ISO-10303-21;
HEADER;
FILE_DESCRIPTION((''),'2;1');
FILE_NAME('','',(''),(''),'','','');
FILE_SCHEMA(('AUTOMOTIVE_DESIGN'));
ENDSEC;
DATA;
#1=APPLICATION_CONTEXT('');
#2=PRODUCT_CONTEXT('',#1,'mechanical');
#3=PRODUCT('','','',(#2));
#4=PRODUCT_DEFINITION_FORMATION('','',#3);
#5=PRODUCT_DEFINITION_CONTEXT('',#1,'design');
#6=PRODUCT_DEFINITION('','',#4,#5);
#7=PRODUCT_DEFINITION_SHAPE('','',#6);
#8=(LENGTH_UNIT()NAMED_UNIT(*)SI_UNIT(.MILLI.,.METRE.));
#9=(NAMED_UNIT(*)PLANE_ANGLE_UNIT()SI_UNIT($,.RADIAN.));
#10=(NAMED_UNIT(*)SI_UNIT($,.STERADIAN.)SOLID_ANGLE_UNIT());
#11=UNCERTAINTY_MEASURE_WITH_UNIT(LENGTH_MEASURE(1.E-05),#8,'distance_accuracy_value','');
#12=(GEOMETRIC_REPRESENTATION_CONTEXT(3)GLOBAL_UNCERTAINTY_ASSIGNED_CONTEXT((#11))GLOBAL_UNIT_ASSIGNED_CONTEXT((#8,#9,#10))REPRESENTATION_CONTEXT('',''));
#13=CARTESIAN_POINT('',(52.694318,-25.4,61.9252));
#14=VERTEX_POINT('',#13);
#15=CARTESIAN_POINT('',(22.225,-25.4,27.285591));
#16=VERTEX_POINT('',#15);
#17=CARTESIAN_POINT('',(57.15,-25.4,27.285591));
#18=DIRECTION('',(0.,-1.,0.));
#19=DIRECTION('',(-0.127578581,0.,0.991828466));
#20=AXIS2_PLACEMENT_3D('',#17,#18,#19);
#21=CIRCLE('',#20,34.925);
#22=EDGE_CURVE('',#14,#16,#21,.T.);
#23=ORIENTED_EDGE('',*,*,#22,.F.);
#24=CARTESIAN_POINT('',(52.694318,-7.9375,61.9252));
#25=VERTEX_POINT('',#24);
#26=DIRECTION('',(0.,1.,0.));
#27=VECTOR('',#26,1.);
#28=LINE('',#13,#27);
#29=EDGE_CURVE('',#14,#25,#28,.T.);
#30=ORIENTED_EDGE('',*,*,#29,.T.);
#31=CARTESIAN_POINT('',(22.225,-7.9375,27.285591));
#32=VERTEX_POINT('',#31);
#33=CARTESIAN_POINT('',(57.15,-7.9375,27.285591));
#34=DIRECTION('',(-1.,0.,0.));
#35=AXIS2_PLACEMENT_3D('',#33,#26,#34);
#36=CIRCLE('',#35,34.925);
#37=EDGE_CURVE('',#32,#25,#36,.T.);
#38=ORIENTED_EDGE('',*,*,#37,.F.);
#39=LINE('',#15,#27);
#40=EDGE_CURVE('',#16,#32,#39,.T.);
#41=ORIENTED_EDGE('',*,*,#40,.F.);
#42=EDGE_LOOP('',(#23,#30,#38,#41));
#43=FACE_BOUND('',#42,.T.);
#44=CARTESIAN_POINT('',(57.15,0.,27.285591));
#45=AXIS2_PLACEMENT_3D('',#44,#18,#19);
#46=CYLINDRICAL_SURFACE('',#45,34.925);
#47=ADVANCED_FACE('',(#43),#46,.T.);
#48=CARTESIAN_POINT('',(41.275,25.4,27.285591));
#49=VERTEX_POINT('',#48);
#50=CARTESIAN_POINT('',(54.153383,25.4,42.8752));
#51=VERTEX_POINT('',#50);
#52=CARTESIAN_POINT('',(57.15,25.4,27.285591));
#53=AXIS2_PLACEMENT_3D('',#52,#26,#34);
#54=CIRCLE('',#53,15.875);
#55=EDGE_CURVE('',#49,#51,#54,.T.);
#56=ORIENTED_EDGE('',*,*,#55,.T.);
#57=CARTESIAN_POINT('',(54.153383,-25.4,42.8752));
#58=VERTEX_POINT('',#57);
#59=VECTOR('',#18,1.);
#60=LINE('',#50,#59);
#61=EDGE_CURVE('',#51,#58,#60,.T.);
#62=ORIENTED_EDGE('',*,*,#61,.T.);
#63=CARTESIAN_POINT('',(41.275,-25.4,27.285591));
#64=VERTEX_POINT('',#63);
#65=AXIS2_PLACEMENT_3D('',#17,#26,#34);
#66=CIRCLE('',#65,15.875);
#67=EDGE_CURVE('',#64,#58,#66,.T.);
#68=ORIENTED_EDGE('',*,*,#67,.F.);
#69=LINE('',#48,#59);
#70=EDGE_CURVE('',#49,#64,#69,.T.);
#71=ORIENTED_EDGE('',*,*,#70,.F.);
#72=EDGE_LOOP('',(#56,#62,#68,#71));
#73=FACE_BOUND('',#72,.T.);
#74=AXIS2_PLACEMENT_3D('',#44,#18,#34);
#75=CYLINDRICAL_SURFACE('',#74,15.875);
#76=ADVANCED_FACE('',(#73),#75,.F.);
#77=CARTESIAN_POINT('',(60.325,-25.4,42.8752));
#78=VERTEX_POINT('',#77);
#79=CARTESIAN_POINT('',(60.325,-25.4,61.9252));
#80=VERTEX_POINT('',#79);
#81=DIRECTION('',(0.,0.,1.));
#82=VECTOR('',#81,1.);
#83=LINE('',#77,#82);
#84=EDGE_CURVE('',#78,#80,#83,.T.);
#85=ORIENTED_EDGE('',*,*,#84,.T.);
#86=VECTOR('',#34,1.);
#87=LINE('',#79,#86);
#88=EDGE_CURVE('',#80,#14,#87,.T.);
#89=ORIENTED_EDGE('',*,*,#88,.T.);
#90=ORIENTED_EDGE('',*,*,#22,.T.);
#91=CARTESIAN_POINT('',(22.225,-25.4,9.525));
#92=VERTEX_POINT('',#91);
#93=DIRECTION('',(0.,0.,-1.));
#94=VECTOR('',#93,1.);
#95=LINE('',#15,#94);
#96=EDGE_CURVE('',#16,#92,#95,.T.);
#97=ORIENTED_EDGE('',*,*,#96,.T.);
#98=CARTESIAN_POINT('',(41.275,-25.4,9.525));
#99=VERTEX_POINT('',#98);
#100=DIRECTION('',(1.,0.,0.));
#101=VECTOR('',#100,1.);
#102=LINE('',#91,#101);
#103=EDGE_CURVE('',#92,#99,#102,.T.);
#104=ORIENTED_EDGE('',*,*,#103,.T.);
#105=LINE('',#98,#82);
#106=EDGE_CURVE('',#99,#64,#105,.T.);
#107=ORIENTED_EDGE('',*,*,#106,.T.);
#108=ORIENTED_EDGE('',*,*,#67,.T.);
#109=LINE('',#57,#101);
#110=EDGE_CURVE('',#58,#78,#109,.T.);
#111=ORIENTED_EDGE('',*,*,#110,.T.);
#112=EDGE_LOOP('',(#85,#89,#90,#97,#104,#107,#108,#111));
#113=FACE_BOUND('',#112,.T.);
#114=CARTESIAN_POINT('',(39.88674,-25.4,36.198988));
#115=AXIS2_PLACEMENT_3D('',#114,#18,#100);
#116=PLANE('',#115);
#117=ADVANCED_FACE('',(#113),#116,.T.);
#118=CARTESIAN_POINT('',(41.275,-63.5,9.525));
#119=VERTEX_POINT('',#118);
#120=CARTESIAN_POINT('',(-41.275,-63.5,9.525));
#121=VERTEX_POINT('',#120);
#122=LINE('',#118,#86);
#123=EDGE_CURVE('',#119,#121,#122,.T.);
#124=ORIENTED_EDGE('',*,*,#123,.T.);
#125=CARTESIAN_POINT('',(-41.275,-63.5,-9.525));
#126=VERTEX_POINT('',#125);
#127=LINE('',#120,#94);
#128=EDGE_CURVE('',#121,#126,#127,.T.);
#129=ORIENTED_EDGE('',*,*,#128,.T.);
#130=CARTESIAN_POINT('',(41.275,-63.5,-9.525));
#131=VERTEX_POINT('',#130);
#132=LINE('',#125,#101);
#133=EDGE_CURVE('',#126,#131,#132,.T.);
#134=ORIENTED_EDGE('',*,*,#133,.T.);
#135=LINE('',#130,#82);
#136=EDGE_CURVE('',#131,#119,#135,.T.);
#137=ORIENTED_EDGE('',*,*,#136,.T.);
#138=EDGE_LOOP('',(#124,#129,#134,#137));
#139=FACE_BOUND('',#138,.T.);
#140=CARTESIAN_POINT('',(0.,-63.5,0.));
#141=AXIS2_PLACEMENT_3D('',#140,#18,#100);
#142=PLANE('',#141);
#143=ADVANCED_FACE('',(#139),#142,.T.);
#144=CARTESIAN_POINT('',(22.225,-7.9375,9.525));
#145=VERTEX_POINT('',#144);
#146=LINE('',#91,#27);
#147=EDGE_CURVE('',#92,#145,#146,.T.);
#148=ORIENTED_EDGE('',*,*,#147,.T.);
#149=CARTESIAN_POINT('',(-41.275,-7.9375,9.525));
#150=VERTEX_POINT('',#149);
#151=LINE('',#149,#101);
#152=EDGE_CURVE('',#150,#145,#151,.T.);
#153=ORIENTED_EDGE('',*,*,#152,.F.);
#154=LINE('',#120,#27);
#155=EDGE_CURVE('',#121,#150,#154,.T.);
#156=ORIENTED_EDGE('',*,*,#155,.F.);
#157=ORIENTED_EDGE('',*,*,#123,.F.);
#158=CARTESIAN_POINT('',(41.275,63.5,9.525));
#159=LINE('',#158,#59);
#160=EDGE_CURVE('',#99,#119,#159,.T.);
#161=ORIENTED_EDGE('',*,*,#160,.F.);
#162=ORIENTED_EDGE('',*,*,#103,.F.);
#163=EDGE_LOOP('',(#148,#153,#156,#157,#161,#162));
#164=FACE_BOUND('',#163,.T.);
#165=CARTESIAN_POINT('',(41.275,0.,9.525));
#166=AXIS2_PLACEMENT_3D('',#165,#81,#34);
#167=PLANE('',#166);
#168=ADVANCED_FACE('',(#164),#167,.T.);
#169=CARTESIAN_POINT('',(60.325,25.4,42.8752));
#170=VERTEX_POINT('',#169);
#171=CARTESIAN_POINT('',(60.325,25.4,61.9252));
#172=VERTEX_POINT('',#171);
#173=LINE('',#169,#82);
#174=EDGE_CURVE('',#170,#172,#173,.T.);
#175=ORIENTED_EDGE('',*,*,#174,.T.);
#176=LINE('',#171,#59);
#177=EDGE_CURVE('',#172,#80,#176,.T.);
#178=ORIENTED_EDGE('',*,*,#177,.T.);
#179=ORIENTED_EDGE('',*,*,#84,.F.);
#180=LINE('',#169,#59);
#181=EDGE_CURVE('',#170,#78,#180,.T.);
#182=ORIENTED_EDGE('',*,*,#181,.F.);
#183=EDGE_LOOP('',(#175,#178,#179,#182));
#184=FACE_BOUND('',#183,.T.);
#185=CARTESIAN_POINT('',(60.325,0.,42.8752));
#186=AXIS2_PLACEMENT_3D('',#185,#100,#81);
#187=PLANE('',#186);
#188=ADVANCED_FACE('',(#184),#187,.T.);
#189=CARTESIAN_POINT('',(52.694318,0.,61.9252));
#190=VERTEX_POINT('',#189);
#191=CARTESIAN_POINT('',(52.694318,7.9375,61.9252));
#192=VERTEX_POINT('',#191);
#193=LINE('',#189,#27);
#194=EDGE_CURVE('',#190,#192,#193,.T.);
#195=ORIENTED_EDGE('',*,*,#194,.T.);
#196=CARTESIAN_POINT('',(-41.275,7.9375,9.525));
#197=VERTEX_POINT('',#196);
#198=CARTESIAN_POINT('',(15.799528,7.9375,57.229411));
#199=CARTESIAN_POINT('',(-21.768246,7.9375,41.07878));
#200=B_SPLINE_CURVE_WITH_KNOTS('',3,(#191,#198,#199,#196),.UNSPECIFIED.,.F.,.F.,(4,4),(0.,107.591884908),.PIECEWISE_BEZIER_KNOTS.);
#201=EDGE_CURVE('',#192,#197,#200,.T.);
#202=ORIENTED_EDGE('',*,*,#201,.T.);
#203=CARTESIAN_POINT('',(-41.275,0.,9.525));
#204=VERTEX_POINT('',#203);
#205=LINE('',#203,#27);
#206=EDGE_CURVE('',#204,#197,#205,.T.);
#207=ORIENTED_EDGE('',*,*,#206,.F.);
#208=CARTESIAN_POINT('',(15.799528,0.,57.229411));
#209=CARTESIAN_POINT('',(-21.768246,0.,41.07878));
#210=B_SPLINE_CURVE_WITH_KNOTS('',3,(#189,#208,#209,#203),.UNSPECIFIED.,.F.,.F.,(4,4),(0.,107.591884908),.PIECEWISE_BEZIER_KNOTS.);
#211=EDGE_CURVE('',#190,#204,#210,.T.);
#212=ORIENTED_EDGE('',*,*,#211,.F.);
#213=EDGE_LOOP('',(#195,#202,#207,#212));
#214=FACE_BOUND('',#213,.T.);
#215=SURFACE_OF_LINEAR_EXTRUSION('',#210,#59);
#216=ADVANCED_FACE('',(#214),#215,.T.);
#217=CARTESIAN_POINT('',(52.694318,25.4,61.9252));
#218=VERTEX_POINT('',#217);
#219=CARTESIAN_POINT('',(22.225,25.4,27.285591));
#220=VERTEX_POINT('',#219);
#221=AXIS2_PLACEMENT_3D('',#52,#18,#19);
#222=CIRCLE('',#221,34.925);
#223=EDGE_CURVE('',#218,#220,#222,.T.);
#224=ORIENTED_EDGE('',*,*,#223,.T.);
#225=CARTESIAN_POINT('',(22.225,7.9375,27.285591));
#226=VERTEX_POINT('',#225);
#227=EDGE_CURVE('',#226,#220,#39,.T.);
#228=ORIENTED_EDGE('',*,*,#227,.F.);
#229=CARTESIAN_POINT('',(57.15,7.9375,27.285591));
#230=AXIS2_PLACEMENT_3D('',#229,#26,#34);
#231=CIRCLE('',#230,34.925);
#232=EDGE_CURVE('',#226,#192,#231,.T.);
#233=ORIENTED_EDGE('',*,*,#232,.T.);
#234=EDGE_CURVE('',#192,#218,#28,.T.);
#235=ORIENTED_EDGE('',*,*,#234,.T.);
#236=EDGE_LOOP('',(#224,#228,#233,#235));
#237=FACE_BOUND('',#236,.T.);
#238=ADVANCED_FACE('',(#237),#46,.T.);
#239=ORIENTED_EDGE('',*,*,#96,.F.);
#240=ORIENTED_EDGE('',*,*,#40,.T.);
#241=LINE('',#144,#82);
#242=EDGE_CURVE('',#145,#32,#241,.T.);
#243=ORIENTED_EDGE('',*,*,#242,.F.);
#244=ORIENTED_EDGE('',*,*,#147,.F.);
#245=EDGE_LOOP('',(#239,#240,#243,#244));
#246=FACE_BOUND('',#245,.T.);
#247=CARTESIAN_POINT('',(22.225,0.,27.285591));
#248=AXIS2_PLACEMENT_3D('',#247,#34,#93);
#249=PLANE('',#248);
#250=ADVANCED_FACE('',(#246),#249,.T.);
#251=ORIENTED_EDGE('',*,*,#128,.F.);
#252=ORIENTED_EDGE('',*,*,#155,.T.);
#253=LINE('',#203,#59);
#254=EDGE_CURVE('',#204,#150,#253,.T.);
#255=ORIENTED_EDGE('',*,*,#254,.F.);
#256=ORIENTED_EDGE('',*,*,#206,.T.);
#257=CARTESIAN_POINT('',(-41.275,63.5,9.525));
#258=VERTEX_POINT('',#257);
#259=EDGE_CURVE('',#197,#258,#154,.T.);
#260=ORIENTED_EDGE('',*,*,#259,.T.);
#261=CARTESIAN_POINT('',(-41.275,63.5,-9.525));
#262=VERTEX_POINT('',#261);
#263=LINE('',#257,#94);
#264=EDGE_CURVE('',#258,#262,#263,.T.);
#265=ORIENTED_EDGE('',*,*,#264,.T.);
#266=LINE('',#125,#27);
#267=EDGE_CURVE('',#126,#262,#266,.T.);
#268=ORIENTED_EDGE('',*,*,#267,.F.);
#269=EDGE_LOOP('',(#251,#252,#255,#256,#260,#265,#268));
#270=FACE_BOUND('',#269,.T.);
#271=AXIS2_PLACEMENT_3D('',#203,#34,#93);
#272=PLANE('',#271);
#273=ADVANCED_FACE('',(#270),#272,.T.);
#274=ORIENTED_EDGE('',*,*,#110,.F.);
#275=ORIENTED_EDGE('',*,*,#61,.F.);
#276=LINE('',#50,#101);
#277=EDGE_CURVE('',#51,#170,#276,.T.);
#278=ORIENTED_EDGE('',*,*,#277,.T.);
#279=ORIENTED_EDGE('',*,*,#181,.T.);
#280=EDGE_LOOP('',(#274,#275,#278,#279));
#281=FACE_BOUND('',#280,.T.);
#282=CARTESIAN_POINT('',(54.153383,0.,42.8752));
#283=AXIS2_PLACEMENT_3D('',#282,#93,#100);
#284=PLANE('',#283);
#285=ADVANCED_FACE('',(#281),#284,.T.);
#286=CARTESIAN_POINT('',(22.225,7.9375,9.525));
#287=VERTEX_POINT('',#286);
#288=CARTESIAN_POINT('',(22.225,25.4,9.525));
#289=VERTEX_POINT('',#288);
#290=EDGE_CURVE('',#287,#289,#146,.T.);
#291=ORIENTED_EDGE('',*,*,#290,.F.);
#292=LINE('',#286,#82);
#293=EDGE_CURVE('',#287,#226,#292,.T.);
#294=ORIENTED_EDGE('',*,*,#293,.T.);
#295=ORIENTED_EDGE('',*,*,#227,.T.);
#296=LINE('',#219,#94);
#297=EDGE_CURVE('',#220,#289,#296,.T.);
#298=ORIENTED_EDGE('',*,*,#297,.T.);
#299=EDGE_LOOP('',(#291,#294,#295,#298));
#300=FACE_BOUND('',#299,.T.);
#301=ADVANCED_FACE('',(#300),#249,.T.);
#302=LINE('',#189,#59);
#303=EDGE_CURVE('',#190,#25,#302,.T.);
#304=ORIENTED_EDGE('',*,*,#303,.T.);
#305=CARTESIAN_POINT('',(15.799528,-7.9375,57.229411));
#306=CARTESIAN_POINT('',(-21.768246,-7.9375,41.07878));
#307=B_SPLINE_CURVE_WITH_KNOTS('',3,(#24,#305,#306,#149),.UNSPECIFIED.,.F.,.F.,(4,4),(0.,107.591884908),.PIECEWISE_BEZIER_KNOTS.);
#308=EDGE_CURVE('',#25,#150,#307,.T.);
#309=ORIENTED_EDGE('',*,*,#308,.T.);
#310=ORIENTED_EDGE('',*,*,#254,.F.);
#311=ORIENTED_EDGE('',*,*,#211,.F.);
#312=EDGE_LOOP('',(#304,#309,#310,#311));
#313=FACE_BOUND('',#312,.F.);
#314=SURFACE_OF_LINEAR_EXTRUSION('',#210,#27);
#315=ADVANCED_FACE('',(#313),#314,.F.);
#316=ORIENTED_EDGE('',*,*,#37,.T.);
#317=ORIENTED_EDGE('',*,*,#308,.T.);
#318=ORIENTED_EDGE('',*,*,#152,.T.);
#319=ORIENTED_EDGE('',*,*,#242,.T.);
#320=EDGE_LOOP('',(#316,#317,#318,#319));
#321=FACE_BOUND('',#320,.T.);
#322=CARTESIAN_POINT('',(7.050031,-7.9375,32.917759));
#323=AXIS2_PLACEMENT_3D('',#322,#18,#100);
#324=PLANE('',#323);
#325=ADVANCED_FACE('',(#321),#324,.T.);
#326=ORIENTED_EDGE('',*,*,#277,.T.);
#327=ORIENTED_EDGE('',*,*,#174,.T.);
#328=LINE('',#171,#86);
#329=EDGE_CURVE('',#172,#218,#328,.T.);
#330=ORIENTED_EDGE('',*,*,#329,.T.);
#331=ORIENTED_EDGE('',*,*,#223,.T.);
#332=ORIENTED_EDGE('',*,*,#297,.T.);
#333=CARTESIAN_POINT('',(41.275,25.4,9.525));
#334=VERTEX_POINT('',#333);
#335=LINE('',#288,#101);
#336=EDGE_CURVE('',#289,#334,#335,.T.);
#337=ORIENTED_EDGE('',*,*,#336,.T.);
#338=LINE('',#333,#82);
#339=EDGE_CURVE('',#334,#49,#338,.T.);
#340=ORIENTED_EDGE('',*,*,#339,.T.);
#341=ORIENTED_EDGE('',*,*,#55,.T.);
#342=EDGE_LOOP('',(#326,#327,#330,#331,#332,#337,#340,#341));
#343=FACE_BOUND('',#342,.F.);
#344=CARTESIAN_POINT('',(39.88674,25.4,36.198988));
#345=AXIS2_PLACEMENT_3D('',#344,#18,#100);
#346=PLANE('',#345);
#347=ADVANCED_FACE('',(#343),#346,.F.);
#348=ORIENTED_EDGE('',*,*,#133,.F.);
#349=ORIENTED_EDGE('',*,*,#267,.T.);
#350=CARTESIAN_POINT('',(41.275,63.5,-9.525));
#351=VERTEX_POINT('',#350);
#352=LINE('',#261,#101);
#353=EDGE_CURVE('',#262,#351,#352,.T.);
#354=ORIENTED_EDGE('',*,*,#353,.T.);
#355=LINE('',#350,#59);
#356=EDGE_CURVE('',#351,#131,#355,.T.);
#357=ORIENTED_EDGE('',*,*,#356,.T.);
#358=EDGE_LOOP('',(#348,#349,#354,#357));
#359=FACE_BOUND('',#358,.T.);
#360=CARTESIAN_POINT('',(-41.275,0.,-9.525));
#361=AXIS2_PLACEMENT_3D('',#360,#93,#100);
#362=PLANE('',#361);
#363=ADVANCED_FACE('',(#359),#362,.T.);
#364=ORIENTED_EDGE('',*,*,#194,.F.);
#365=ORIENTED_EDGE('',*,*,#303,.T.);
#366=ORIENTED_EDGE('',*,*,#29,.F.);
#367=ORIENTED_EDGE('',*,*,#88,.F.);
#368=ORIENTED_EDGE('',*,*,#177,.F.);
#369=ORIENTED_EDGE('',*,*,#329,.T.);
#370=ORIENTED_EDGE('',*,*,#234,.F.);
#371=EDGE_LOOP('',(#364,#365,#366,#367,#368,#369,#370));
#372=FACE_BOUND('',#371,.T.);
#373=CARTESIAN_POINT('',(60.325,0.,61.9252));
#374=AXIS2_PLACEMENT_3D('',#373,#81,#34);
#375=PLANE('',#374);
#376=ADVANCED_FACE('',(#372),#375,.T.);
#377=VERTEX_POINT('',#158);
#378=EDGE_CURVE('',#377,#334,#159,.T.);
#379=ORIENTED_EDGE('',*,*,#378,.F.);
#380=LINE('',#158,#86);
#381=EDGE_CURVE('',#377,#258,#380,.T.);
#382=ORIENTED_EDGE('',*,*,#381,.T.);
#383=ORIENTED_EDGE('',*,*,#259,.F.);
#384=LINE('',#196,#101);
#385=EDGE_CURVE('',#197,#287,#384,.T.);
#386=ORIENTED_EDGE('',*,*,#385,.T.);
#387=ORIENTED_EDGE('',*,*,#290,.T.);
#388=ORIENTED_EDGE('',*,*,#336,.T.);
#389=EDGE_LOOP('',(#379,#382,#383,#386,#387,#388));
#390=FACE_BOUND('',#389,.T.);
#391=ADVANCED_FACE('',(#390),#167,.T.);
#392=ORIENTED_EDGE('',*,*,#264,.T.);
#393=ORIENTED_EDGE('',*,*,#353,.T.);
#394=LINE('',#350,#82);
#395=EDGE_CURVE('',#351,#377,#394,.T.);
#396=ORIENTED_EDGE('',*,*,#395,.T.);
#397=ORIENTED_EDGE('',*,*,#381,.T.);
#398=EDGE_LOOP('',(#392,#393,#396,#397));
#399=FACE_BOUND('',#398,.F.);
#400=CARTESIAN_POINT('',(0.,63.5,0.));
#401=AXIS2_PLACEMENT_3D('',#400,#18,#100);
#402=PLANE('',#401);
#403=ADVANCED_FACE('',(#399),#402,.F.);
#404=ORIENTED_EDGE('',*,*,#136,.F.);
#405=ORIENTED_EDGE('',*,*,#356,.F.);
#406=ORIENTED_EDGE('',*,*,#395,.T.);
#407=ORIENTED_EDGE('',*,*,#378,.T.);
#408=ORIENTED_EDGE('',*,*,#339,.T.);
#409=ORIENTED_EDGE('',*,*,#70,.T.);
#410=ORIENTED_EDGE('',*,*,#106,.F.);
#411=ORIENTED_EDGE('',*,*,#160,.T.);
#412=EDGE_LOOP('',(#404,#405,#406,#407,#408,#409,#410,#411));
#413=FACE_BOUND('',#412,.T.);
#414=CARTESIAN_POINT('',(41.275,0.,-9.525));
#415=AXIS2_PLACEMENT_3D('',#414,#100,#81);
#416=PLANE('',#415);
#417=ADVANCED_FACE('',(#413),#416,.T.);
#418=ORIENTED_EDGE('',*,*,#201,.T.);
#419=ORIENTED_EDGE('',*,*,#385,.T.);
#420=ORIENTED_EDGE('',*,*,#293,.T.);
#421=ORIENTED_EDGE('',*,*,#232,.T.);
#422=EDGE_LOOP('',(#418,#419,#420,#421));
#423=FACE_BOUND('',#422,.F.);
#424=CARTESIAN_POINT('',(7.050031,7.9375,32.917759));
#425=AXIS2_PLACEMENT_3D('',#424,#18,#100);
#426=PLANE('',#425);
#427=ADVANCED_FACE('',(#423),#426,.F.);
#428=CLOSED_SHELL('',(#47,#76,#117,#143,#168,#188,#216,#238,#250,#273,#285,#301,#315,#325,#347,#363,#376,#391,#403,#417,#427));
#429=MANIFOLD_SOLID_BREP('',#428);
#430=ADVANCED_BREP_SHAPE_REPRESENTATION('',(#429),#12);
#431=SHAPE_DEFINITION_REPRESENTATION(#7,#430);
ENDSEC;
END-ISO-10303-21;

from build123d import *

# Parameters (mm, degrees)
F1_DEPTH = 63.5
F2_DEPTH = 25.4
F3_DEPTH = 7.9375


with BuildPart() as f1:
    # F0 (on Front) → F1 (new body, symmetric)
    with BuildSketch(Plane.XZ):
        Polygon((-41.275, -9.525), (41.275, -9.525), (41.275, 9.525), (22.225, 9.525), (-41.275, 9.525), align=None)
    extrude(amount=F1_DEPTH, both=True)

    # F0 (on Front) → F2 (join, symmetric)
    with BuildSketch(Plane.XZ):
        with BuildLine():
            Line((22.225, 9.525), (41.275, 9.525))
            Line((41.275, 9.525), (41.275, 27.2855908291))
            ThreePointArc((41.275, 27.2855908291), (44.9109862911, 37.3960887611), (54.1533834246, 42.8752))
            Line((54.1533834246, 42.8752), (60.325, 42.8752))
            Line((60.325, 42.8752), (60.325, 61.9252))
            Line((60.325, 61.9252), (52.6943180668, 61.9252))
            ThreePointArc((52.6943180668, 61.9252), (30.926248204, 50.3522435282), (22.225, 27.2855908291))
            Line((22.225, 27.2855908291), (22.225, 9.525))
        make_face()
    extrude(amount=F2_DEPTH, both=True)

    # F0 (on Front) → F3 (join, symmetric)
    with BuildSketch(Plane.XZ):
        with BuildLine():
            add(Edge.make_bspline(
                [(52.6943180668, 61.9252), (15.7995279878, 57.229410857), (-21.768245846, 41.0787798464), (-41.275, 9.525)],
                knots=[0, 0, 0, 0, 107.5918849076, 107.5918849076, 107.5918849076, 107.5918849076], degree=3))
            Line((-41.275, 9.525), (22.225, 9.525))
            Line((22.225, 9.525), (22.225, 27.2855908291))
            ThreePointArc((22.225, 27.2855908291), (30.926248204, 50.3522435282), (52.6943180668, 61.9252))
        make_face()
    extrude(amount=F3_DEPTH, both=True)


solid = f1.part
